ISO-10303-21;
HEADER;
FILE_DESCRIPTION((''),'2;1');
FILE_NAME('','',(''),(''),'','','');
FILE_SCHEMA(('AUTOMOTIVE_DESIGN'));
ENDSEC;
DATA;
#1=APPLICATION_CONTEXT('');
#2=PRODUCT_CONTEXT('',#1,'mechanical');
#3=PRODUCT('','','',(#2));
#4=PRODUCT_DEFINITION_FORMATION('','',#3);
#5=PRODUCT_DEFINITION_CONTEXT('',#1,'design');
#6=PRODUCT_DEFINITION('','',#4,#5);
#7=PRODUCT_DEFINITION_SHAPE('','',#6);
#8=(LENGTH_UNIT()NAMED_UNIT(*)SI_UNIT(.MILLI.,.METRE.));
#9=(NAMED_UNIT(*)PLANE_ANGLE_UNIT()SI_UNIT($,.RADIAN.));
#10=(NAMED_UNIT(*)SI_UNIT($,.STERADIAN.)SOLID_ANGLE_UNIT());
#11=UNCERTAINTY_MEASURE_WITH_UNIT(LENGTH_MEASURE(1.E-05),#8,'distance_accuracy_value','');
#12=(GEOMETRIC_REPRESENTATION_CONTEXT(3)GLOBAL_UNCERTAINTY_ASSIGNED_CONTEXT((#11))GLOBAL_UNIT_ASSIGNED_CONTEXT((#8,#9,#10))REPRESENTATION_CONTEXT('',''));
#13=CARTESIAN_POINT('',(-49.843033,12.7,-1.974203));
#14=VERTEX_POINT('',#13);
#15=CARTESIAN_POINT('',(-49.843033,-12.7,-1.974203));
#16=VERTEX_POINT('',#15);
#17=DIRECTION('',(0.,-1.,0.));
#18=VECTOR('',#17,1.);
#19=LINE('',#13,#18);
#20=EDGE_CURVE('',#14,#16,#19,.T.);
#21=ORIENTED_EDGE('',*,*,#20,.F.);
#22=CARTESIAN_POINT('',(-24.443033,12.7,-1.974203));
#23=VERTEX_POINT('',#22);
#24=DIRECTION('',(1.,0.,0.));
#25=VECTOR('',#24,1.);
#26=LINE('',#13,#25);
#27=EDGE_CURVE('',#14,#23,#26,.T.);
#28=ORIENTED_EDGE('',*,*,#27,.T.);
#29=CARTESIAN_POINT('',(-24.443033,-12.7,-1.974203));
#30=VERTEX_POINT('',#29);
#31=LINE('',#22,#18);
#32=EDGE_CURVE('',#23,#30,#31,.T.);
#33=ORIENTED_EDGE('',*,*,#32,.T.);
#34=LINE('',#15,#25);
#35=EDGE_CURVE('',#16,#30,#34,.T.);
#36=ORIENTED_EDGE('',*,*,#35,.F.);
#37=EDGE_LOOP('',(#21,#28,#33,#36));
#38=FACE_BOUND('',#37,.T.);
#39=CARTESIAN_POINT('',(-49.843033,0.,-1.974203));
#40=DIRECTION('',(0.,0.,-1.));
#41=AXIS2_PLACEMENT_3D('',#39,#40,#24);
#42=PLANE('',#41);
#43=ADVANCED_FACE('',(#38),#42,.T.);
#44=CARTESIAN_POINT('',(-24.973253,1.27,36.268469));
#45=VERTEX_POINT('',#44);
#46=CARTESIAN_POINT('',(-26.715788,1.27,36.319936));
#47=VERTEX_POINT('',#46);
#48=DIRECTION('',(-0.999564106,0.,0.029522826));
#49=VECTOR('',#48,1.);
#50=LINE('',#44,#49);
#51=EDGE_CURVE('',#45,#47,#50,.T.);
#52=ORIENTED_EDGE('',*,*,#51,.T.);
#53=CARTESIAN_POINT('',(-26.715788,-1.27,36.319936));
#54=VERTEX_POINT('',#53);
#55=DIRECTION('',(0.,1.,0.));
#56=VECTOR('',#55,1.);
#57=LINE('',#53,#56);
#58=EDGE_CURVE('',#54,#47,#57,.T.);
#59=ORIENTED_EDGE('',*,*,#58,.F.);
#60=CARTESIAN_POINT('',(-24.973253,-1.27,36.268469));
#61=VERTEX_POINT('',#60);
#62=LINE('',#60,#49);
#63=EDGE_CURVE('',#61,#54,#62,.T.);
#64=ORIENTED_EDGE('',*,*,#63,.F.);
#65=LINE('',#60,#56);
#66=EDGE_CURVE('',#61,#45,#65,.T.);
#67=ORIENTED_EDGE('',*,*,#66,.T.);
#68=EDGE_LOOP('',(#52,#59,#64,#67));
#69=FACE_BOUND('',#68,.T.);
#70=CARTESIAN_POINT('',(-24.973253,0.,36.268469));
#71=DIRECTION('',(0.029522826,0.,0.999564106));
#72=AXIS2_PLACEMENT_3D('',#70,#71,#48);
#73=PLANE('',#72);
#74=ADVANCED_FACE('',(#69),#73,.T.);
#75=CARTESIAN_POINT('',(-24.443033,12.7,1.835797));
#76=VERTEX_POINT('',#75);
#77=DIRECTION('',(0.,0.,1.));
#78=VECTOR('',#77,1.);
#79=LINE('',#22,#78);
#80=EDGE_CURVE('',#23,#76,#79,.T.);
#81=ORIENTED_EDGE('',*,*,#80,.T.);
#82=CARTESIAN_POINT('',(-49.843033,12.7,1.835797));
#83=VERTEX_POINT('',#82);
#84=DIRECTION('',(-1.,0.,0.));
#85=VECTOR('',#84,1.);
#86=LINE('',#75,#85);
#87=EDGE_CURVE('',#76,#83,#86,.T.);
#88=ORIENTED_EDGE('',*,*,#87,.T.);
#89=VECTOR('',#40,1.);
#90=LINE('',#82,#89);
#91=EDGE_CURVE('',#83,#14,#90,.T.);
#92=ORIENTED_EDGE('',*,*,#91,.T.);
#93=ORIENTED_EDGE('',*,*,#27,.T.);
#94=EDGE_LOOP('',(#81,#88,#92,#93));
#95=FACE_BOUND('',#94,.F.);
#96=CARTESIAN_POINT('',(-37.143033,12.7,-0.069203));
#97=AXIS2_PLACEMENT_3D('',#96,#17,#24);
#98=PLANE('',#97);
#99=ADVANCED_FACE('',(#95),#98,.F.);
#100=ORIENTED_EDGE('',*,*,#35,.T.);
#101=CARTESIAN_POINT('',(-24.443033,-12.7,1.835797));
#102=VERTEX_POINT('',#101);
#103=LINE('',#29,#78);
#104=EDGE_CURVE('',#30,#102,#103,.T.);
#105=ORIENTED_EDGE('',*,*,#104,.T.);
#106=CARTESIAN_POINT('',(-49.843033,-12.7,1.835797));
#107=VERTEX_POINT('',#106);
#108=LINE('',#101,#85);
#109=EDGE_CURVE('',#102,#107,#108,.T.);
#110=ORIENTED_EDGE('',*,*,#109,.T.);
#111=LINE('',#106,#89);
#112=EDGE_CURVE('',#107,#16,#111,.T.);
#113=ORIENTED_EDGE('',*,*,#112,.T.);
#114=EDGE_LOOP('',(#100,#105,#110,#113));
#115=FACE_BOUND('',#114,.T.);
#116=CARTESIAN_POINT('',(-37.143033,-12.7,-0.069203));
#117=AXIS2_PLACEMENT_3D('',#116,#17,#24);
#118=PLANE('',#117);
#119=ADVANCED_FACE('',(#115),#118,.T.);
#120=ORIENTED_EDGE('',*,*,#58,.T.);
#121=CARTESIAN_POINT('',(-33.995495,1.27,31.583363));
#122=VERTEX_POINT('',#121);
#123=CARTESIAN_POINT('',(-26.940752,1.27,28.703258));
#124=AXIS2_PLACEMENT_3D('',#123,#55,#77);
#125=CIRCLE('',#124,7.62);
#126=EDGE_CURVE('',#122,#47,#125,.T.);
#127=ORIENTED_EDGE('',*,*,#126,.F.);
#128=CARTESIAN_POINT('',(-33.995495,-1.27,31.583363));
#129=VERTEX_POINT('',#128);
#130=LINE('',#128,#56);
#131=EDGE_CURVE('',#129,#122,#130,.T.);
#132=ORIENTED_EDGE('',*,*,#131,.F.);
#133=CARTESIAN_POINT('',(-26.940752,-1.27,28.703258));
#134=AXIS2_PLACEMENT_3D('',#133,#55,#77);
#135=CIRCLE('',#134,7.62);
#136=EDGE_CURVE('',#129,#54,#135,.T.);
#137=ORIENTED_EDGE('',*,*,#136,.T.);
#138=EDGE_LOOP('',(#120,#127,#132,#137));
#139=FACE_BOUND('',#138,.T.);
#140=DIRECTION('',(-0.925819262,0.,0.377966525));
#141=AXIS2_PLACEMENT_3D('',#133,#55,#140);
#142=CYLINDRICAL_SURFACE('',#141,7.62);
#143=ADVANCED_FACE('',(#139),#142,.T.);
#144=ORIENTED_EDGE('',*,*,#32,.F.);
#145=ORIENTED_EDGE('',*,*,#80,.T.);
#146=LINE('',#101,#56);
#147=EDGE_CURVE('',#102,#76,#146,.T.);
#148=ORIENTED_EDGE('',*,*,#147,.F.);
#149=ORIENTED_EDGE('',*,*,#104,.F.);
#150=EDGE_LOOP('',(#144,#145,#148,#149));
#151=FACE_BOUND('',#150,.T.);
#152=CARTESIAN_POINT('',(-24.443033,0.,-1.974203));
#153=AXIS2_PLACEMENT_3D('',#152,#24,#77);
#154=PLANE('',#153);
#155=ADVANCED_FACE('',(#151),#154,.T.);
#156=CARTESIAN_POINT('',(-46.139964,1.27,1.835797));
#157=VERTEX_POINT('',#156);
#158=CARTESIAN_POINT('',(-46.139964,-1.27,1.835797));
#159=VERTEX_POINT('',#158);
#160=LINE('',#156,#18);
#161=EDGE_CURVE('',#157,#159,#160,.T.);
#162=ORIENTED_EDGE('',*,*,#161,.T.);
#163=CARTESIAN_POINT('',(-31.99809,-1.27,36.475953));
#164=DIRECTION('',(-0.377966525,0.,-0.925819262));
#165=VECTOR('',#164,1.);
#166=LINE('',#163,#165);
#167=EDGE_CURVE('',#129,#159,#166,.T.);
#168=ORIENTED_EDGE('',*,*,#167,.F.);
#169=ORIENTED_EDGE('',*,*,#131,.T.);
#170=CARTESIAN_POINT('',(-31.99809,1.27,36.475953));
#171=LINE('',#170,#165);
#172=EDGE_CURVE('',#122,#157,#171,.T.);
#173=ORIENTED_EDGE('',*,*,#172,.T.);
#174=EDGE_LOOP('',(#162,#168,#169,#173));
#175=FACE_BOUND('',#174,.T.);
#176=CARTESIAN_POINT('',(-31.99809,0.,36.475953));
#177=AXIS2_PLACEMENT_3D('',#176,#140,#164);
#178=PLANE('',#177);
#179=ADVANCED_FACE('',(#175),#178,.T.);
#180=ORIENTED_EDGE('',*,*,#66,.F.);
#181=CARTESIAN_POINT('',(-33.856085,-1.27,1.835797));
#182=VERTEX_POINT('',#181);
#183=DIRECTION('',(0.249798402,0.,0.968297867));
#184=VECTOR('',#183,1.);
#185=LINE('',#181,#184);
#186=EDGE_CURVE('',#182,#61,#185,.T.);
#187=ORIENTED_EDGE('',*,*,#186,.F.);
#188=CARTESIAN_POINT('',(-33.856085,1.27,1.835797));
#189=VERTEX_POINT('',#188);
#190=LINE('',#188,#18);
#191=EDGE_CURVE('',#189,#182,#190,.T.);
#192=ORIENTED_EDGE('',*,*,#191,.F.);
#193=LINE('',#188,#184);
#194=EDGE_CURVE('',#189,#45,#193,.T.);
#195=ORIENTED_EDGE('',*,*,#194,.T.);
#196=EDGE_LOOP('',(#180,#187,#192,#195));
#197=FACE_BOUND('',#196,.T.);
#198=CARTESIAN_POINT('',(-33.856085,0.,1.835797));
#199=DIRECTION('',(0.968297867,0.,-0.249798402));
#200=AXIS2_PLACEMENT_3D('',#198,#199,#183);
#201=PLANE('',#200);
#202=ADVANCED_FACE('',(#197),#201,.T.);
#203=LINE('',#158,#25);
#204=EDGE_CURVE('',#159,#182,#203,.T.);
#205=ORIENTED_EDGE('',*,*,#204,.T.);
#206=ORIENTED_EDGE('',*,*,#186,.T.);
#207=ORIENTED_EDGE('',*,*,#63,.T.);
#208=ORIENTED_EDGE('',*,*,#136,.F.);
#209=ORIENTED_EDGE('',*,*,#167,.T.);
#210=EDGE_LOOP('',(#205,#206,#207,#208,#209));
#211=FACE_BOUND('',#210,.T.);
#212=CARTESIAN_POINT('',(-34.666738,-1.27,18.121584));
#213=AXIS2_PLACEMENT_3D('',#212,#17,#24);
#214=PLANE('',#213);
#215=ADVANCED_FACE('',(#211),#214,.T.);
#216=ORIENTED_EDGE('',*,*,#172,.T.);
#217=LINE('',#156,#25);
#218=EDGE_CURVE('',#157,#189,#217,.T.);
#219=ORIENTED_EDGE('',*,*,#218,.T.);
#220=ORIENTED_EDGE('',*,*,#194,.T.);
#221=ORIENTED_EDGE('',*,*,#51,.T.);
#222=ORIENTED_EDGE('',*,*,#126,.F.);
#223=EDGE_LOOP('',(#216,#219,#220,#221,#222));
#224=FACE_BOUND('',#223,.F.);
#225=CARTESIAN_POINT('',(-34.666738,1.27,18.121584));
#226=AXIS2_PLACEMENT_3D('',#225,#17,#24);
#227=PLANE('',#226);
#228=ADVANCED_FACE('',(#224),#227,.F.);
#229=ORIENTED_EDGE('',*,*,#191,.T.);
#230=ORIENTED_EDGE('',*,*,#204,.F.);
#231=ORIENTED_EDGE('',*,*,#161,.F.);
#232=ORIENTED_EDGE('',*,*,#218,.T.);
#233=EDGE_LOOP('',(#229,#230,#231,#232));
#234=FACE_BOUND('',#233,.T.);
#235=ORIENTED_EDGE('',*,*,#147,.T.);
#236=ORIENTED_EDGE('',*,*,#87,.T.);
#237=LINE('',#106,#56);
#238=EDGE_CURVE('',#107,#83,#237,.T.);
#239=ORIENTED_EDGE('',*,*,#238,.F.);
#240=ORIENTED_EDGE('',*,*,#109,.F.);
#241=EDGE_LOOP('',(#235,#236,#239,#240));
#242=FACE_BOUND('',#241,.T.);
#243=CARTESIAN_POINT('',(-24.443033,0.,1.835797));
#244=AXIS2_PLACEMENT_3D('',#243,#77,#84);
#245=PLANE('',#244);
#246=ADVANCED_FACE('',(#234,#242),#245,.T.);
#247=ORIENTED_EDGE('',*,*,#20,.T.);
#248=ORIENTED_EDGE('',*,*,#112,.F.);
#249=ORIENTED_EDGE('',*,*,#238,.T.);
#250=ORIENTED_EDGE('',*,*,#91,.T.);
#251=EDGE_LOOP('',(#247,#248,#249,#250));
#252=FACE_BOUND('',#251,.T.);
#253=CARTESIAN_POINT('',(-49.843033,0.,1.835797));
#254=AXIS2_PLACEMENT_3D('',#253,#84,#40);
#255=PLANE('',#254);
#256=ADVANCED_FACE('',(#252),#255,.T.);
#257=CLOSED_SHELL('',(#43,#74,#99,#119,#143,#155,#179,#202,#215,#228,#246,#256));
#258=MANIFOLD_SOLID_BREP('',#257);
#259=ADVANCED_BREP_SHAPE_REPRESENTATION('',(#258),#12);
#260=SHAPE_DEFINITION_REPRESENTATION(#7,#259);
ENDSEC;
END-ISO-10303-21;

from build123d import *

# Parameters (mm, degrees)
F1_DEPTH = 12.7
F2_DEPTH = 1.27
F3_R     = 7.62


# Not quite as in the source:
# - a feature names something its author has since deleted; it is built from what else it names


with BuildPart() as f1:
    # F0 (on Front) → F1 (new body, symmetric)
    with BuildSketch(Plane.XZ):
        Polygon((-46.139964322, 1.8357970985), (-49.8430333048, 1.8357970985), (-49.8430333048, -1.9742029015), (-24.4430333048, -1.9742029015), (-24.4430333048, 1.8357970985), (-33.8560845901, 1.8357970985), align=None)
    extrude(amount=F1_DEPTH, both=True)

    # F0 (on Front) → F2 (join, symmetric)
    with BuildSketch(Plane.XZ):
        Polygon((-31.998090446, 36.4759527147), (-46.139964322, 1.8357970985), (-33.8560845901, 1.8357970985), (-24.9732534132, 36.2684692324), align=None)
    extrude(amount=F2_DEPTH, both=True)

    # F3
    f3_edges = [f1.edges().sort_by_distance(p)[0] for p in [
        (-31.99809, 0, 36.475953),
    ]]
    fillet(f3_edges, radius=F3_R)


solid = f1.part
